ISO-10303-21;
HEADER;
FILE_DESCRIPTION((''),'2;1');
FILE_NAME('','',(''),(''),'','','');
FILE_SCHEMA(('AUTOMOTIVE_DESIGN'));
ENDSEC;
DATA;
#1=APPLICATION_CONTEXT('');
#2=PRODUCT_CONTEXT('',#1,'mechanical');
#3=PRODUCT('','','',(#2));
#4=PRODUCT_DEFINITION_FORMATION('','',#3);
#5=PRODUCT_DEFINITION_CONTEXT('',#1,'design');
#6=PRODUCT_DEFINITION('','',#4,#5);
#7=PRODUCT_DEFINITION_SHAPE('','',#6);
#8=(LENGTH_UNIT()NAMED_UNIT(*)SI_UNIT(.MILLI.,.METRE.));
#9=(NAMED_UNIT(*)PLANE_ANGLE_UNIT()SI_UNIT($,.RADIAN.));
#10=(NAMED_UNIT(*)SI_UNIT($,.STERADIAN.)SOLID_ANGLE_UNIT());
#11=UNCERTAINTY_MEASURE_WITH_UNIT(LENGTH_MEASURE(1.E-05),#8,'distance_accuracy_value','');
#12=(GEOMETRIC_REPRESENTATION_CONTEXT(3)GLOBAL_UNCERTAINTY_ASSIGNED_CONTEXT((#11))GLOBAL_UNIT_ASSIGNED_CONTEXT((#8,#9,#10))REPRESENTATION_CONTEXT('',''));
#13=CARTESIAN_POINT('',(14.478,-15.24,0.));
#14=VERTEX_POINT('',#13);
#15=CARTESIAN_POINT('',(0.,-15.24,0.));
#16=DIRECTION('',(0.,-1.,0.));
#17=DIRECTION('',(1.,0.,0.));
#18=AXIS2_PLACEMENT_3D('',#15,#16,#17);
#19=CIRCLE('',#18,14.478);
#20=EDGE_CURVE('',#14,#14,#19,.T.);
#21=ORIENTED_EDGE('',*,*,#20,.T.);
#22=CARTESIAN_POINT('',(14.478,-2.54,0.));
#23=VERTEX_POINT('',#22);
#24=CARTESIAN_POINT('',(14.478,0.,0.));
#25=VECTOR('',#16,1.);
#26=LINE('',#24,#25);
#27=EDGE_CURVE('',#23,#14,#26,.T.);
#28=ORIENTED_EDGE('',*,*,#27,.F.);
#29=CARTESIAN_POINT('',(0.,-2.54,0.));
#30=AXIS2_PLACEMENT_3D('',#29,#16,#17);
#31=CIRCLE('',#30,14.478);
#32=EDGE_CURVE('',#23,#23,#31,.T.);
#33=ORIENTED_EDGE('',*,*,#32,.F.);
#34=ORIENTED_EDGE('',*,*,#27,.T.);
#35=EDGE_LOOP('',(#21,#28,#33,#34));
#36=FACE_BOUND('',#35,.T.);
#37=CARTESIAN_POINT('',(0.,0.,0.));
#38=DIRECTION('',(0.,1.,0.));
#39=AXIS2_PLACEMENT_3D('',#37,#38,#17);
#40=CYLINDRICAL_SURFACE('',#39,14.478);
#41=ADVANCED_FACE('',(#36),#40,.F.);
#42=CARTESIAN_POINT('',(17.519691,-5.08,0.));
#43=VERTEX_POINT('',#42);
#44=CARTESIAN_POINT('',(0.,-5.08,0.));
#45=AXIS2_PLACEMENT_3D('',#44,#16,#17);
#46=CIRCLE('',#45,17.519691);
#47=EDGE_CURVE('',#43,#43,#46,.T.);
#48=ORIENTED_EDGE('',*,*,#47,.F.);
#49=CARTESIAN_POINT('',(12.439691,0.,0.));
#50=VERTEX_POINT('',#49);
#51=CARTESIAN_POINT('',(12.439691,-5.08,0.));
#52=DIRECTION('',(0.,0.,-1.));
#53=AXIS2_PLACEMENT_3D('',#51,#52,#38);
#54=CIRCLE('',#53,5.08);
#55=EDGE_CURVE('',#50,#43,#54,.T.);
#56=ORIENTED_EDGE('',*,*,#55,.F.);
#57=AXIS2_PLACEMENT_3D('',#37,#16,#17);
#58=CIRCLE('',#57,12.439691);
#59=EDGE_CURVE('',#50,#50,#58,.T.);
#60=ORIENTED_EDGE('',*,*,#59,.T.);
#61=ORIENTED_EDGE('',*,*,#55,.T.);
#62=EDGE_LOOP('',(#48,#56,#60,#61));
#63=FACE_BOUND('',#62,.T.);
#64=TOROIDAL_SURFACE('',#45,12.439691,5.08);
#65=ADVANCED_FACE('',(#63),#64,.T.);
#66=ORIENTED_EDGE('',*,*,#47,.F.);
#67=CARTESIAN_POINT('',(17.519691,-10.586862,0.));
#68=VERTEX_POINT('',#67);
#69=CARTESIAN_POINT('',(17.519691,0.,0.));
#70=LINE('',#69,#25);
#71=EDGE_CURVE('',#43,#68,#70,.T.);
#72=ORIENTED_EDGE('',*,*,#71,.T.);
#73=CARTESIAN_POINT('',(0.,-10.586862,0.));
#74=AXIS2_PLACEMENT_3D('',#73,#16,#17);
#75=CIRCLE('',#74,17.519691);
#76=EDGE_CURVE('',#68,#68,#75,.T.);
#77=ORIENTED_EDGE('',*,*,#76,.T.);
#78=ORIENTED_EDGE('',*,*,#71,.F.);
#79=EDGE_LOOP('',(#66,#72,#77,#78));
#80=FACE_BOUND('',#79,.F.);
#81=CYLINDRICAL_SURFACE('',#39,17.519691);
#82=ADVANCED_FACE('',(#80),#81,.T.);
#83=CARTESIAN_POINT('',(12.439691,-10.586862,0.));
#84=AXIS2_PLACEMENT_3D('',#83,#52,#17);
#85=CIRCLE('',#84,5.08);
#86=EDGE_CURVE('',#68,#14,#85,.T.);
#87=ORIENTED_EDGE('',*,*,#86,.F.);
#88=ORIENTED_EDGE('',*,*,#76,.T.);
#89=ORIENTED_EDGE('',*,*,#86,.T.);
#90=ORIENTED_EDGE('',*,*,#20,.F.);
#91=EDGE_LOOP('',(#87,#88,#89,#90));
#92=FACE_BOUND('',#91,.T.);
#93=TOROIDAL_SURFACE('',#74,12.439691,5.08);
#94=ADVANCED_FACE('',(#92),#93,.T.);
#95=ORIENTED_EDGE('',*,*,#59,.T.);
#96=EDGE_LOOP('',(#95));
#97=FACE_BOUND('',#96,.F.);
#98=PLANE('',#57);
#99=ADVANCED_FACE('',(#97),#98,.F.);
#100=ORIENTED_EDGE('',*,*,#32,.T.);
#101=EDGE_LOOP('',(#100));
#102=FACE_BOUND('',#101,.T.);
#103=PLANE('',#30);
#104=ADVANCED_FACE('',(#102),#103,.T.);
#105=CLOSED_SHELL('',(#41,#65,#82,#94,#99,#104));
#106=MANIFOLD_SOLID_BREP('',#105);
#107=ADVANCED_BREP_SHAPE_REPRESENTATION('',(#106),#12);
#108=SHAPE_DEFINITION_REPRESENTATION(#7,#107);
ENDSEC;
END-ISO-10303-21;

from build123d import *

# Parameters (mm, degrees)
F0_R     = 14.478
F1_DEPTH = 2.54
F0_R_2   = 17.5196905757
F2_DEPTH = 15.24


# Not quite as in the source:
# - a fillet or chamfer that OpenCascade refuses, or shapes differently, is made with other operations: its cross-section is extruded or revolved along the edge and cut away or added


with BuildPart() as f1:
    # F0 (on Front) → F1 (new body)
    with BuildSketch(Plane.XZ):
        Circle(F0_R)
    extrude(amount=F1_DEPTH)

    # F0 (on Front) → F2 (join)
    with BuildSketch(Plane.XZ):
        Circle(F0_R_2)
        Circle(F0_R, mode=Mode.SUBTRACT)
    extrude(amount=F2_DEPTH)

    # F3: fillet of radius 5.08 on 3 edges, made by hand

    # F3_s1 → F3_t2 (revolve, cut)
    with BuildSketch(Plane.XY):
        with BuildLine():
            ThreePointArc((12.4396905757, 0), (16.0317930242, -1.4878975516), (17.5196905757, -5.08))
            Line((17.5196905757, -5.08), (17.6212905757, -5.08))
            Line((17.6212905757, -5.08), (17.6212905757, 0.1016))
            Line((17.6212905757, 0.1016), (12.4396905757, 0.1016))
            Line((12.4396905757, 0.1016), (12.4396905757, 0))
        make_face()
    revolve(axis=Axis((0, 0, 0), (0, -1, 0)), mode=Mode.SUBTRACT)

    # F3_s3 → F3_t4 (revolve, cut)
    with BuildSketch(Plane.XY):
        with BuildLine():
            ThreePointArc((17.5196905757, -10.5868618448), (16.6918083937, -13.3664111001), (14.478, -15.24))
            Line((14.478, -15.24), (14.5187661885, -15.3330627631))
            ThreePointArc((14.5187661885, -15.3330627631), (15.9988452879, -15.3416), (17.5196905757, -15.3416))
            Line((17.5196905757, -15.3416), (17.6212905757, -15.24))
            Line((17.6212905757, -15.24), (17.6212905757, -10.5868618448))
            Line((17.6212905757, -10.5868618448), (17.5196905757, -10.5868618448))
        make_face()
    revolve(axis=Axis((0, -15.24, 0), (0, -1, 0)), mode=Mode.SUBTRACT)


solid = f1.part
